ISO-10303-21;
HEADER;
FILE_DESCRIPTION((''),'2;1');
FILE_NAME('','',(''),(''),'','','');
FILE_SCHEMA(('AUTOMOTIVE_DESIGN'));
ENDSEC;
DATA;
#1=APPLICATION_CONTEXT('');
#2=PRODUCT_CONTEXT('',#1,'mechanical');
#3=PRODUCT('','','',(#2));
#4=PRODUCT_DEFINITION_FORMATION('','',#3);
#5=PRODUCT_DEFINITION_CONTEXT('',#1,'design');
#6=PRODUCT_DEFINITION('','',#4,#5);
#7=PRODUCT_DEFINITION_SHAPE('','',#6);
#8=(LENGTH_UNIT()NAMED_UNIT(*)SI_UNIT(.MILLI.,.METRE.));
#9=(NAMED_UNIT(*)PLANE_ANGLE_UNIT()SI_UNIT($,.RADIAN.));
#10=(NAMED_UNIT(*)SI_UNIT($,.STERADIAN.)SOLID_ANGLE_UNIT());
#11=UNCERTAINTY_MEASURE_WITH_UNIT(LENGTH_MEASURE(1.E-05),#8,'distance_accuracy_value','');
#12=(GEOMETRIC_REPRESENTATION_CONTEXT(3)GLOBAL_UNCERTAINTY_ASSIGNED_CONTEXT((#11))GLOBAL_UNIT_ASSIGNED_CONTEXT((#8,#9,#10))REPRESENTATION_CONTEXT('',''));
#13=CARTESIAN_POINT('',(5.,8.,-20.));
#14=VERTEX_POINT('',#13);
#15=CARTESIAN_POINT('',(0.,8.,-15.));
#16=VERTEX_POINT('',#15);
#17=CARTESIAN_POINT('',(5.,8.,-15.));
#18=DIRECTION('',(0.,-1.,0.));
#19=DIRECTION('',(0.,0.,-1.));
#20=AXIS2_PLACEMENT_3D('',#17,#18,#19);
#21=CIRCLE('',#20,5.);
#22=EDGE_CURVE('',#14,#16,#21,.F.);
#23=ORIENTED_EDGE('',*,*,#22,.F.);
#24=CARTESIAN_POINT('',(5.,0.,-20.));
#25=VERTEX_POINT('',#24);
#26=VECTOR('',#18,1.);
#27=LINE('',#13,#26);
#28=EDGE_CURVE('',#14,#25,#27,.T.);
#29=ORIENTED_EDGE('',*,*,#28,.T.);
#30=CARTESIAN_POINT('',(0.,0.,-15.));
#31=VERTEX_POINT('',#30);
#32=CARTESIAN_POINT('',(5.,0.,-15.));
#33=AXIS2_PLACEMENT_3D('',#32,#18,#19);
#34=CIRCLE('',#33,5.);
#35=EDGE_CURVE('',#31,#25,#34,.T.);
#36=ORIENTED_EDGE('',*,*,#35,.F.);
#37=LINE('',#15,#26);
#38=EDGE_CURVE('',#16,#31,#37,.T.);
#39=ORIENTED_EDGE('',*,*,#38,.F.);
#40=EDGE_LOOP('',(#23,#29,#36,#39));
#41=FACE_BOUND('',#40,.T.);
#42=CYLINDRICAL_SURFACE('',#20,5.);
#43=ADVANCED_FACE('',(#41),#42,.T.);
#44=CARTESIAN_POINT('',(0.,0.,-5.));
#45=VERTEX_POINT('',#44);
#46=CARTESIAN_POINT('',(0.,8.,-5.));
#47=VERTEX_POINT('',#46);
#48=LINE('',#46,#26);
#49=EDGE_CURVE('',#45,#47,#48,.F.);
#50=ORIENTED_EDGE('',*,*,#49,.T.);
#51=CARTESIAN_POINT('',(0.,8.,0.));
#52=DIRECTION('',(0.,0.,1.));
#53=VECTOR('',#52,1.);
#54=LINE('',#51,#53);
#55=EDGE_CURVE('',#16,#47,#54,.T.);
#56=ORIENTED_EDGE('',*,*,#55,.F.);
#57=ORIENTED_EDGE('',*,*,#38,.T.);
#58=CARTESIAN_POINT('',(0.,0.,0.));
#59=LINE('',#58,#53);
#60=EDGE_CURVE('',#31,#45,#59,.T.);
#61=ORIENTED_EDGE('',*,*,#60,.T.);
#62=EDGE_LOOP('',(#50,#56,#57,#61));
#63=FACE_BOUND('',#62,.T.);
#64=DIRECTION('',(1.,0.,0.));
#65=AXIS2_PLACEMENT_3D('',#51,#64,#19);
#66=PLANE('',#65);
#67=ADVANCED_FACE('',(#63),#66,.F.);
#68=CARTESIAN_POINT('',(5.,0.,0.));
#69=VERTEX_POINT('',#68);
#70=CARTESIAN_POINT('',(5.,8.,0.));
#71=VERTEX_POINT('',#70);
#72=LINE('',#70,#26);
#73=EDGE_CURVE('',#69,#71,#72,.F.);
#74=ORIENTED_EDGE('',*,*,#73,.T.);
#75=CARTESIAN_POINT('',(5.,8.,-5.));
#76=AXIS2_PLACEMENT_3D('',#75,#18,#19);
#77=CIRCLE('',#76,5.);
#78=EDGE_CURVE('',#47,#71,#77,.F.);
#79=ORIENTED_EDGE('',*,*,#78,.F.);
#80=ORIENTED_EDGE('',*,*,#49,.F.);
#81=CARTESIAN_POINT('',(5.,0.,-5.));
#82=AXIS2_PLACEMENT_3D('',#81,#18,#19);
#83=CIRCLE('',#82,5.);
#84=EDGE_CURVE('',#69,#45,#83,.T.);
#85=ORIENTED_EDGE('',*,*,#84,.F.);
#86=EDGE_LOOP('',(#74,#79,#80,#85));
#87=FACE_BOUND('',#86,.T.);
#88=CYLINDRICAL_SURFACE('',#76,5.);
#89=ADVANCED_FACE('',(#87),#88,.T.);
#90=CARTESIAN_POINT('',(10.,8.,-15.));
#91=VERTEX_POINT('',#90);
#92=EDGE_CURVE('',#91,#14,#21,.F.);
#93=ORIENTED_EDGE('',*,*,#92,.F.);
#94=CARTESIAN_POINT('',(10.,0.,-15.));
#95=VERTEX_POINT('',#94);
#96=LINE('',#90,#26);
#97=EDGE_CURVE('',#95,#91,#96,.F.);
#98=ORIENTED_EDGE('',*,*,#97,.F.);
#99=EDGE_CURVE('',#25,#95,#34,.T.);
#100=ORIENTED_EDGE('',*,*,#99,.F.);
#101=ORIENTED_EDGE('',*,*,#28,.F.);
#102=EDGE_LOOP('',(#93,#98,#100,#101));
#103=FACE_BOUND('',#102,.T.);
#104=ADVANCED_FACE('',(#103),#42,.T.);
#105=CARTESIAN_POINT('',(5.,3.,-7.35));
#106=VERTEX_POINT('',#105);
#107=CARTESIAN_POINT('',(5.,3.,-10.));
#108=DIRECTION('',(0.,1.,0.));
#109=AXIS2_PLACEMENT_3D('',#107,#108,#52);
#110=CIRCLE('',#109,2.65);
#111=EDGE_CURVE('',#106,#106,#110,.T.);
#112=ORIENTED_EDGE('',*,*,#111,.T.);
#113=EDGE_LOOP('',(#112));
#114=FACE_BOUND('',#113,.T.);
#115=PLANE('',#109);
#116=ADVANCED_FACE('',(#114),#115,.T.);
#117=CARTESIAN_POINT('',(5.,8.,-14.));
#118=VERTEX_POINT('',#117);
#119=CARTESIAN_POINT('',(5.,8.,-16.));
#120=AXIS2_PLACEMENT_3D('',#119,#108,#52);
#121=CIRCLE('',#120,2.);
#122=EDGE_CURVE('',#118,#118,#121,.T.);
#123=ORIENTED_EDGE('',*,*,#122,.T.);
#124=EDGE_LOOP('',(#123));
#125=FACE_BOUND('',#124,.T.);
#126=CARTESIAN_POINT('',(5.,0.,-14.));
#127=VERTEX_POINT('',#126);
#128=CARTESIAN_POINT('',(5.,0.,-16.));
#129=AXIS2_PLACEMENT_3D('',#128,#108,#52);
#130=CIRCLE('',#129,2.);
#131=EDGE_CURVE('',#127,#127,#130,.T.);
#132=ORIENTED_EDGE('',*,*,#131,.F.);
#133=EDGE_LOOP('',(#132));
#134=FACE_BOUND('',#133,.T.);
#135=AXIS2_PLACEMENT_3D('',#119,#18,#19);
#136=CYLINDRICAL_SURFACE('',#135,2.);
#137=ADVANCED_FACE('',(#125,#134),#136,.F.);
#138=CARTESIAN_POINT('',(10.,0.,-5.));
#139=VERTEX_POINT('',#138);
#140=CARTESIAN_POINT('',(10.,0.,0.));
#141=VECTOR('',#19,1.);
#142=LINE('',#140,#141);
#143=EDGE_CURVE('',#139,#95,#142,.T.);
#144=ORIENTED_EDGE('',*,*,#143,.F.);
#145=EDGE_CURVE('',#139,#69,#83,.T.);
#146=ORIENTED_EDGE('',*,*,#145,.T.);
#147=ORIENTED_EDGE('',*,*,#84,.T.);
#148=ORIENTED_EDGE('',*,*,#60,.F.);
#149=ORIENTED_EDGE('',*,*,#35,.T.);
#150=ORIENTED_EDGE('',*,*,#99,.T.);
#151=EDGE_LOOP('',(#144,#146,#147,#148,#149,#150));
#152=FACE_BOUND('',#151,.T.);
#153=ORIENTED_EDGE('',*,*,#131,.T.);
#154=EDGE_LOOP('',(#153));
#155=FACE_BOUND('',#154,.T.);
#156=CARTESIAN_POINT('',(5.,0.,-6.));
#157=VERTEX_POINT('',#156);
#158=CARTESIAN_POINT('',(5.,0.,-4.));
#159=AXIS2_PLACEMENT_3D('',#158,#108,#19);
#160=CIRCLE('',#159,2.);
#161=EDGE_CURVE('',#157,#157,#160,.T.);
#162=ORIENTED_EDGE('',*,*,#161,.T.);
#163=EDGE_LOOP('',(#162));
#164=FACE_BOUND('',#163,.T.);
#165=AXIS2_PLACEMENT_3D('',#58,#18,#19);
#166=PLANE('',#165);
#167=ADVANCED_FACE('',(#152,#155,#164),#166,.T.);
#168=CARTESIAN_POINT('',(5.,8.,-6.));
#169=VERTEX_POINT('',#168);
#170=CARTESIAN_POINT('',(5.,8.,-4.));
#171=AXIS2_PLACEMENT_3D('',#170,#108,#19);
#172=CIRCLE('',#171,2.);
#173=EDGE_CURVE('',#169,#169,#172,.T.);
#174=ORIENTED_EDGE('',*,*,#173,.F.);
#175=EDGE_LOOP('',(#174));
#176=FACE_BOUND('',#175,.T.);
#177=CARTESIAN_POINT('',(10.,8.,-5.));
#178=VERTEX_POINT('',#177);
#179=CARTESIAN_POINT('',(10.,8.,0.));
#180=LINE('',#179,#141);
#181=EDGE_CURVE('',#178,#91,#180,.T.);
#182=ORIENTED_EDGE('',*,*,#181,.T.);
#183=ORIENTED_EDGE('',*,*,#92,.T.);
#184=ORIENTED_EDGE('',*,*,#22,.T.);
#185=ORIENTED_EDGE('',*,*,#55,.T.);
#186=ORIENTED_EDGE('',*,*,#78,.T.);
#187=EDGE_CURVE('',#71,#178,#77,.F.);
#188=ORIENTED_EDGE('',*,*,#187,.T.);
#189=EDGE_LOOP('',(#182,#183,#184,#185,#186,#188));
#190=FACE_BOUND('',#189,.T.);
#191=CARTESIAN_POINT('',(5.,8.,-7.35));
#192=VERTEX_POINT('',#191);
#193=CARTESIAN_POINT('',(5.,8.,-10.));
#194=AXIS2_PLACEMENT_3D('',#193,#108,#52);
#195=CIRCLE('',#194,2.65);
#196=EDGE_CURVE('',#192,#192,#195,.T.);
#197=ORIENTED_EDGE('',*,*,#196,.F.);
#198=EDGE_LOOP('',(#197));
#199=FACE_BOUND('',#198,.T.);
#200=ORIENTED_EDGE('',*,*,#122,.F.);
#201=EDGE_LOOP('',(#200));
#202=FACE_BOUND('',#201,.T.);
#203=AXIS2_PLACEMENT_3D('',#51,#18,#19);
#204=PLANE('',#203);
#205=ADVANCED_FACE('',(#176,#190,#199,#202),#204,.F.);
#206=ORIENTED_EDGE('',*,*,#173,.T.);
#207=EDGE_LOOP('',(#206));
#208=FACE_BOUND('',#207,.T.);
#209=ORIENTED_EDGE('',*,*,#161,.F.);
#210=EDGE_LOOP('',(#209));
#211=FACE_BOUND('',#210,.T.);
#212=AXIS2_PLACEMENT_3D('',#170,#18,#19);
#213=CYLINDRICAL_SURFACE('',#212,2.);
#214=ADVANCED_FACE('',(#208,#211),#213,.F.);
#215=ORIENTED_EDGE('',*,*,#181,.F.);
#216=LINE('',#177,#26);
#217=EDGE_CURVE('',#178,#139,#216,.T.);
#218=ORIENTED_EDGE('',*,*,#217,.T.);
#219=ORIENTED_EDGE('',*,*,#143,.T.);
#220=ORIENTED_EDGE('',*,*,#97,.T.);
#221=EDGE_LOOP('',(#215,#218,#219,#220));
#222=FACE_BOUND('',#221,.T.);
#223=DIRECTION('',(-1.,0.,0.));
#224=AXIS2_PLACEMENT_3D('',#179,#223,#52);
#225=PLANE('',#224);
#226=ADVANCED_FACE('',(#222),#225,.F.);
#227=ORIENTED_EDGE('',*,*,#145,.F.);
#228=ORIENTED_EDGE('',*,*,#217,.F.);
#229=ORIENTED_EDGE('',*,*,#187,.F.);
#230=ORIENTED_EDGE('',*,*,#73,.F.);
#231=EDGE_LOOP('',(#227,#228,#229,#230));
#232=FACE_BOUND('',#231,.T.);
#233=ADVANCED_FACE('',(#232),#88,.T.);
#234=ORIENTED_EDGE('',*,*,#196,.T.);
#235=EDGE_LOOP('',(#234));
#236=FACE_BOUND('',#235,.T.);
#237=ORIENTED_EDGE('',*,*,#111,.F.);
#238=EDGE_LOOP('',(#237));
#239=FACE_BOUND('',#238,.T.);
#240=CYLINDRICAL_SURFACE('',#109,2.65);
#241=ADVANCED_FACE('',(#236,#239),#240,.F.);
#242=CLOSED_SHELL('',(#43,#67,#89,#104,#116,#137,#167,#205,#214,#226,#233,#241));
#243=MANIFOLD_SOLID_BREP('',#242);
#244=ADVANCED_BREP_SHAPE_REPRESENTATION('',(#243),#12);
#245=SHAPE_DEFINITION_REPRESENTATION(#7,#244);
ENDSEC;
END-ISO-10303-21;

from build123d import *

# Parameters (mm, degrees)
ESQUISSE1_W             = 10
ESQUISSE1_H             = 20
ESQUISSE1_R             = 2
BOSS_EXTRU_1_DEPTH      = 8
ESQUISSE2_R             = 2.65
ENL_V_MAT_EXTRU_1_DEPTH = 5
CONG_1_R                = 5


with BuildPart() as part:
    # Esquisse1 → Boss.-Extru.1 (new body)
    with BuildSketch(Plane(origin=(0, 0, 0), x_dir=(1, 0, 0), z_dir=(0, 1, 0))):
        with Locations((5, 10)):
            Rectangle(ESQUISSE1_W, ESQUISSE1_H)
        with Locations(Location((5, 16, 0), (0, 0, 270))):
            Circle(ESQUISSE1_R, mode=Mode.SUBTRACT)
        with Locations(Location((5, 4, 0), (0, 0, 90))):
            Circle(ESQUISSE1_R, mode=Mode.SUBTRACT)
    extrude(amount=BOSS_EXTRU_1_DEPTH)

    # Esquisse2 → Enlèv. mat.-Extru.1 (cut)
    with BuildSketch(Plane(origin=(0, 8, 0), x_dir=(1, 0, 0), z_dir=(0, 1, 0))):
        with Locations(Location((5, 10, 0), (0, 0, 270))):
            Circle(ESQUISSE2_R)
    extrude(amount=-ENL_V_MAT_EXTRU_1_DEPTH, mode=Mode.SUBTRACT)

    # Congé1
    cong_1_edges = [part.edges().sort_by_distance(p)[0] for p in [
        (0, 4, 0),
        (10, 4, 0),
        (0, 4, -20),
        (10, 4, -20),
    ]]
    fillet(cong_1_edges, radius=CONG_1_R - 0.0001)  # a hair under: the kernel refuses the full size


solid = part.part
